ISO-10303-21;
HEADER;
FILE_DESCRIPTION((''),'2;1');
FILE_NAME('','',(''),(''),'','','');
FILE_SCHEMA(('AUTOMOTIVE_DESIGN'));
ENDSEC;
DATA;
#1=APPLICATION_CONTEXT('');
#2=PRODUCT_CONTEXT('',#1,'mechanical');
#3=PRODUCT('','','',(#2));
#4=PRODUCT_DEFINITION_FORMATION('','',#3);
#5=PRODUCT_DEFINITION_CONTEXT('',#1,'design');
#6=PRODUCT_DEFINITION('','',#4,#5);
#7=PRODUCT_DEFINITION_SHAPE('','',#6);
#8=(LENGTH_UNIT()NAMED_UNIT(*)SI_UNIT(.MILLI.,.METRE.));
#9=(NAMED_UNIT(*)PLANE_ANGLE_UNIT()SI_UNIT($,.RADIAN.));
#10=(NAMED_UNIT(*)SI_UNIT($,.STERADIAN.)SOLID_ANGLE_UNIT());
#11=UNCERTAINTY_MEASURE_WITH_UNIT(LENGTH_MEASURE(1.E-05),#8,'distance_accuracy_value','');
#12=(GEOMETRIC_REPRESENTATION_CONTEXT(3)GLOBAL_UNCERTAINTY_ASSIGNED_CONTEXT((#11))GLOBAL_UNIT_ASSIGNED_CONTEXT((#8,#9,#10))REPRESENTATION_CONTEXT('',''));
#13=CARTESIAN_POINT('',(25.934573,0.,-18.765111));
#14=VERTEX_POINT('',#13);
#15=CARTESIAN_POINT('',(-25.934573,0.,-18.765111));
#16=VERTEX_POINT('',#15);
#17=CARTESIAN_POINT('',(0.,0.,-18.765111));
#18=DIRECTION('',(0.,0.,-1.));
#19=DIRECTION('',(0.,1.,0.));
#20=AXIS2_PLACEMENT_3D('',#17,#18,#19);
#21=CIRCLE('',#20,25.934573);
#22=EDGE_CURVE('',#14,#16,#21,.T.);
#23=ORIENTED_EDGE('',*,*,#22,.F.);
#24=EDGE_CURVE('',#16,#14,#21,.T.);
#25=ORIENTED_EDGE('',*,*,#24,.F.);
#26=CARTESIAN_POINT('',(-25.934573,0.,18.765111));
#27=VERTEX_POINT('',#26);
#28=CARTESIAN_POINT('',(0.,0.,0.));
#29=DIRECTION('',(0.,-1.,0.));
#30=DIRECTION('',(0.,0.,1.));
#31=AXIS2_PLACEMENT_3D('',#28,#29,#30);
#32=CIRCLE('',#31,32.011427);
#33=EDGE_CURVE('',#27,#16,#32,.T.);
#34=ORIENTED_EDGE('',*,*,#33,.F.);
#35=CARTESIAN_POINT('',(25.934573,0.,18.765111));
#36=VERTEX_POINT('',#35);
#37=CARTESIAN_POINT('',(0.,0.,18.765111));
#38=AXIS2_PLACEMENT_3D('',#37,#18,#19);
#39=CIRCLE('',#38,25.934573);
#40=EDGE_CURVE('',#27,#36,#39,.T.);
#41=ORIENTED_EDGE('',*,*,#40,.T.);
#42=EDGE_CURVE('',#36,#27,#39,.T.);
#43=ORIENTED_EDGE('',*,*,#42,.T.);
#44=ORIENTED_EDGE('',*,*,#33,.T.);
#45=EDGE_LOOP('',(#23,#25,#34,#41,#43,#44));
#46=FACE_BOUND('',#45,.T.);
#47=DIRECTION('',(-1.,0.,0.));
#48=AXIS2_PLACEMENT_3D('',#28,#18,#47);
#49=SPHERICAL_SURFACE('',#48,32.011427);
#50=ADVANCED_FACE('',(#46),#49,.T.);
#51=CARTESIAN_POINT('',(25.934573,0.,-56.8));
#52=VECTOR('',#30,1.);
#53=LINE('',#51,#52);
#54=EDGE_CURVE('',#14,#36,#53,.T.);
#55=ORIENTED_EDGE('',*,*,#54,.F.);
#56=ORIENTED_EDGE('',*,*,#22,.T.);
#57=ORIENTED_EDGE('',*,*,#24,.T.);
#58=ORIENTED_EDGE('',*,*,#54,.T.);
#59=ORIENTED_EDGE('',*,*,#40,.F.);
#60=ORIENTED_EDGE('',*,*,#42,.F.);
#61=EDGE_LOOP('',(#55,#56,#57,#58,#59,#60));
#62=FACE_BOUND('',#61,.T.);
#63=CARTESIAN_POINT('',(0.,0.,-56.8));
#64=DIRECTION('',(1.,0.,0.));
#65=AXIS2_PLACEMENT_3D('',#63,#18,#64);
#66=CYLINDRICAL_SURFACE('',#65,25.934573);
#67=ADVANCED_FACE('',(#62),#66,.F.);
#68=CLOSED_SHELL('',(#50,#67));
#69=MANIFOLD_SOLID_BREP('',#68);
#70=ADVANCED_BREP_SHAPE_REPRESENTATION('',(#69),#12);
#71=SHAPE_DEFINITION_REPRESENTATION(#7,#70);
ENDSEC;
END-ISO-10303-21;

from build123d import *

# Parameters (mm, degrees)
F5_R     = 25.9345729703
F6_DEPTH = 176.9


# Not quite as in the source:
# - the program builds the solid bodies; features that only make, move or delete a surface that nothing else refers to are left out


with BuildPart() as f2:
    # F1 (on Front) → F2 (revolve)
    with BuildSketch(Plane.XZ):
        with BuildLine():
            Line((0, -32.0114270779), (0, 32.0114270779))
            ThreePointArc((0, 32.0114270779), (-32.0114270779, 0), (0, -32.0114270779))
        make_face()
    revolve(axis=Axis((0, 0, 0), (0, 0, -1)))

    # F5 (on offset) → F6 (cut)
    with BuildSketch(Plane.XY.offset(-56.8)):
        Circle(F5_R)
    extrude(amount=F6_DEPTH, mode=Mode.SUBTRACT)


solid = f2.part
